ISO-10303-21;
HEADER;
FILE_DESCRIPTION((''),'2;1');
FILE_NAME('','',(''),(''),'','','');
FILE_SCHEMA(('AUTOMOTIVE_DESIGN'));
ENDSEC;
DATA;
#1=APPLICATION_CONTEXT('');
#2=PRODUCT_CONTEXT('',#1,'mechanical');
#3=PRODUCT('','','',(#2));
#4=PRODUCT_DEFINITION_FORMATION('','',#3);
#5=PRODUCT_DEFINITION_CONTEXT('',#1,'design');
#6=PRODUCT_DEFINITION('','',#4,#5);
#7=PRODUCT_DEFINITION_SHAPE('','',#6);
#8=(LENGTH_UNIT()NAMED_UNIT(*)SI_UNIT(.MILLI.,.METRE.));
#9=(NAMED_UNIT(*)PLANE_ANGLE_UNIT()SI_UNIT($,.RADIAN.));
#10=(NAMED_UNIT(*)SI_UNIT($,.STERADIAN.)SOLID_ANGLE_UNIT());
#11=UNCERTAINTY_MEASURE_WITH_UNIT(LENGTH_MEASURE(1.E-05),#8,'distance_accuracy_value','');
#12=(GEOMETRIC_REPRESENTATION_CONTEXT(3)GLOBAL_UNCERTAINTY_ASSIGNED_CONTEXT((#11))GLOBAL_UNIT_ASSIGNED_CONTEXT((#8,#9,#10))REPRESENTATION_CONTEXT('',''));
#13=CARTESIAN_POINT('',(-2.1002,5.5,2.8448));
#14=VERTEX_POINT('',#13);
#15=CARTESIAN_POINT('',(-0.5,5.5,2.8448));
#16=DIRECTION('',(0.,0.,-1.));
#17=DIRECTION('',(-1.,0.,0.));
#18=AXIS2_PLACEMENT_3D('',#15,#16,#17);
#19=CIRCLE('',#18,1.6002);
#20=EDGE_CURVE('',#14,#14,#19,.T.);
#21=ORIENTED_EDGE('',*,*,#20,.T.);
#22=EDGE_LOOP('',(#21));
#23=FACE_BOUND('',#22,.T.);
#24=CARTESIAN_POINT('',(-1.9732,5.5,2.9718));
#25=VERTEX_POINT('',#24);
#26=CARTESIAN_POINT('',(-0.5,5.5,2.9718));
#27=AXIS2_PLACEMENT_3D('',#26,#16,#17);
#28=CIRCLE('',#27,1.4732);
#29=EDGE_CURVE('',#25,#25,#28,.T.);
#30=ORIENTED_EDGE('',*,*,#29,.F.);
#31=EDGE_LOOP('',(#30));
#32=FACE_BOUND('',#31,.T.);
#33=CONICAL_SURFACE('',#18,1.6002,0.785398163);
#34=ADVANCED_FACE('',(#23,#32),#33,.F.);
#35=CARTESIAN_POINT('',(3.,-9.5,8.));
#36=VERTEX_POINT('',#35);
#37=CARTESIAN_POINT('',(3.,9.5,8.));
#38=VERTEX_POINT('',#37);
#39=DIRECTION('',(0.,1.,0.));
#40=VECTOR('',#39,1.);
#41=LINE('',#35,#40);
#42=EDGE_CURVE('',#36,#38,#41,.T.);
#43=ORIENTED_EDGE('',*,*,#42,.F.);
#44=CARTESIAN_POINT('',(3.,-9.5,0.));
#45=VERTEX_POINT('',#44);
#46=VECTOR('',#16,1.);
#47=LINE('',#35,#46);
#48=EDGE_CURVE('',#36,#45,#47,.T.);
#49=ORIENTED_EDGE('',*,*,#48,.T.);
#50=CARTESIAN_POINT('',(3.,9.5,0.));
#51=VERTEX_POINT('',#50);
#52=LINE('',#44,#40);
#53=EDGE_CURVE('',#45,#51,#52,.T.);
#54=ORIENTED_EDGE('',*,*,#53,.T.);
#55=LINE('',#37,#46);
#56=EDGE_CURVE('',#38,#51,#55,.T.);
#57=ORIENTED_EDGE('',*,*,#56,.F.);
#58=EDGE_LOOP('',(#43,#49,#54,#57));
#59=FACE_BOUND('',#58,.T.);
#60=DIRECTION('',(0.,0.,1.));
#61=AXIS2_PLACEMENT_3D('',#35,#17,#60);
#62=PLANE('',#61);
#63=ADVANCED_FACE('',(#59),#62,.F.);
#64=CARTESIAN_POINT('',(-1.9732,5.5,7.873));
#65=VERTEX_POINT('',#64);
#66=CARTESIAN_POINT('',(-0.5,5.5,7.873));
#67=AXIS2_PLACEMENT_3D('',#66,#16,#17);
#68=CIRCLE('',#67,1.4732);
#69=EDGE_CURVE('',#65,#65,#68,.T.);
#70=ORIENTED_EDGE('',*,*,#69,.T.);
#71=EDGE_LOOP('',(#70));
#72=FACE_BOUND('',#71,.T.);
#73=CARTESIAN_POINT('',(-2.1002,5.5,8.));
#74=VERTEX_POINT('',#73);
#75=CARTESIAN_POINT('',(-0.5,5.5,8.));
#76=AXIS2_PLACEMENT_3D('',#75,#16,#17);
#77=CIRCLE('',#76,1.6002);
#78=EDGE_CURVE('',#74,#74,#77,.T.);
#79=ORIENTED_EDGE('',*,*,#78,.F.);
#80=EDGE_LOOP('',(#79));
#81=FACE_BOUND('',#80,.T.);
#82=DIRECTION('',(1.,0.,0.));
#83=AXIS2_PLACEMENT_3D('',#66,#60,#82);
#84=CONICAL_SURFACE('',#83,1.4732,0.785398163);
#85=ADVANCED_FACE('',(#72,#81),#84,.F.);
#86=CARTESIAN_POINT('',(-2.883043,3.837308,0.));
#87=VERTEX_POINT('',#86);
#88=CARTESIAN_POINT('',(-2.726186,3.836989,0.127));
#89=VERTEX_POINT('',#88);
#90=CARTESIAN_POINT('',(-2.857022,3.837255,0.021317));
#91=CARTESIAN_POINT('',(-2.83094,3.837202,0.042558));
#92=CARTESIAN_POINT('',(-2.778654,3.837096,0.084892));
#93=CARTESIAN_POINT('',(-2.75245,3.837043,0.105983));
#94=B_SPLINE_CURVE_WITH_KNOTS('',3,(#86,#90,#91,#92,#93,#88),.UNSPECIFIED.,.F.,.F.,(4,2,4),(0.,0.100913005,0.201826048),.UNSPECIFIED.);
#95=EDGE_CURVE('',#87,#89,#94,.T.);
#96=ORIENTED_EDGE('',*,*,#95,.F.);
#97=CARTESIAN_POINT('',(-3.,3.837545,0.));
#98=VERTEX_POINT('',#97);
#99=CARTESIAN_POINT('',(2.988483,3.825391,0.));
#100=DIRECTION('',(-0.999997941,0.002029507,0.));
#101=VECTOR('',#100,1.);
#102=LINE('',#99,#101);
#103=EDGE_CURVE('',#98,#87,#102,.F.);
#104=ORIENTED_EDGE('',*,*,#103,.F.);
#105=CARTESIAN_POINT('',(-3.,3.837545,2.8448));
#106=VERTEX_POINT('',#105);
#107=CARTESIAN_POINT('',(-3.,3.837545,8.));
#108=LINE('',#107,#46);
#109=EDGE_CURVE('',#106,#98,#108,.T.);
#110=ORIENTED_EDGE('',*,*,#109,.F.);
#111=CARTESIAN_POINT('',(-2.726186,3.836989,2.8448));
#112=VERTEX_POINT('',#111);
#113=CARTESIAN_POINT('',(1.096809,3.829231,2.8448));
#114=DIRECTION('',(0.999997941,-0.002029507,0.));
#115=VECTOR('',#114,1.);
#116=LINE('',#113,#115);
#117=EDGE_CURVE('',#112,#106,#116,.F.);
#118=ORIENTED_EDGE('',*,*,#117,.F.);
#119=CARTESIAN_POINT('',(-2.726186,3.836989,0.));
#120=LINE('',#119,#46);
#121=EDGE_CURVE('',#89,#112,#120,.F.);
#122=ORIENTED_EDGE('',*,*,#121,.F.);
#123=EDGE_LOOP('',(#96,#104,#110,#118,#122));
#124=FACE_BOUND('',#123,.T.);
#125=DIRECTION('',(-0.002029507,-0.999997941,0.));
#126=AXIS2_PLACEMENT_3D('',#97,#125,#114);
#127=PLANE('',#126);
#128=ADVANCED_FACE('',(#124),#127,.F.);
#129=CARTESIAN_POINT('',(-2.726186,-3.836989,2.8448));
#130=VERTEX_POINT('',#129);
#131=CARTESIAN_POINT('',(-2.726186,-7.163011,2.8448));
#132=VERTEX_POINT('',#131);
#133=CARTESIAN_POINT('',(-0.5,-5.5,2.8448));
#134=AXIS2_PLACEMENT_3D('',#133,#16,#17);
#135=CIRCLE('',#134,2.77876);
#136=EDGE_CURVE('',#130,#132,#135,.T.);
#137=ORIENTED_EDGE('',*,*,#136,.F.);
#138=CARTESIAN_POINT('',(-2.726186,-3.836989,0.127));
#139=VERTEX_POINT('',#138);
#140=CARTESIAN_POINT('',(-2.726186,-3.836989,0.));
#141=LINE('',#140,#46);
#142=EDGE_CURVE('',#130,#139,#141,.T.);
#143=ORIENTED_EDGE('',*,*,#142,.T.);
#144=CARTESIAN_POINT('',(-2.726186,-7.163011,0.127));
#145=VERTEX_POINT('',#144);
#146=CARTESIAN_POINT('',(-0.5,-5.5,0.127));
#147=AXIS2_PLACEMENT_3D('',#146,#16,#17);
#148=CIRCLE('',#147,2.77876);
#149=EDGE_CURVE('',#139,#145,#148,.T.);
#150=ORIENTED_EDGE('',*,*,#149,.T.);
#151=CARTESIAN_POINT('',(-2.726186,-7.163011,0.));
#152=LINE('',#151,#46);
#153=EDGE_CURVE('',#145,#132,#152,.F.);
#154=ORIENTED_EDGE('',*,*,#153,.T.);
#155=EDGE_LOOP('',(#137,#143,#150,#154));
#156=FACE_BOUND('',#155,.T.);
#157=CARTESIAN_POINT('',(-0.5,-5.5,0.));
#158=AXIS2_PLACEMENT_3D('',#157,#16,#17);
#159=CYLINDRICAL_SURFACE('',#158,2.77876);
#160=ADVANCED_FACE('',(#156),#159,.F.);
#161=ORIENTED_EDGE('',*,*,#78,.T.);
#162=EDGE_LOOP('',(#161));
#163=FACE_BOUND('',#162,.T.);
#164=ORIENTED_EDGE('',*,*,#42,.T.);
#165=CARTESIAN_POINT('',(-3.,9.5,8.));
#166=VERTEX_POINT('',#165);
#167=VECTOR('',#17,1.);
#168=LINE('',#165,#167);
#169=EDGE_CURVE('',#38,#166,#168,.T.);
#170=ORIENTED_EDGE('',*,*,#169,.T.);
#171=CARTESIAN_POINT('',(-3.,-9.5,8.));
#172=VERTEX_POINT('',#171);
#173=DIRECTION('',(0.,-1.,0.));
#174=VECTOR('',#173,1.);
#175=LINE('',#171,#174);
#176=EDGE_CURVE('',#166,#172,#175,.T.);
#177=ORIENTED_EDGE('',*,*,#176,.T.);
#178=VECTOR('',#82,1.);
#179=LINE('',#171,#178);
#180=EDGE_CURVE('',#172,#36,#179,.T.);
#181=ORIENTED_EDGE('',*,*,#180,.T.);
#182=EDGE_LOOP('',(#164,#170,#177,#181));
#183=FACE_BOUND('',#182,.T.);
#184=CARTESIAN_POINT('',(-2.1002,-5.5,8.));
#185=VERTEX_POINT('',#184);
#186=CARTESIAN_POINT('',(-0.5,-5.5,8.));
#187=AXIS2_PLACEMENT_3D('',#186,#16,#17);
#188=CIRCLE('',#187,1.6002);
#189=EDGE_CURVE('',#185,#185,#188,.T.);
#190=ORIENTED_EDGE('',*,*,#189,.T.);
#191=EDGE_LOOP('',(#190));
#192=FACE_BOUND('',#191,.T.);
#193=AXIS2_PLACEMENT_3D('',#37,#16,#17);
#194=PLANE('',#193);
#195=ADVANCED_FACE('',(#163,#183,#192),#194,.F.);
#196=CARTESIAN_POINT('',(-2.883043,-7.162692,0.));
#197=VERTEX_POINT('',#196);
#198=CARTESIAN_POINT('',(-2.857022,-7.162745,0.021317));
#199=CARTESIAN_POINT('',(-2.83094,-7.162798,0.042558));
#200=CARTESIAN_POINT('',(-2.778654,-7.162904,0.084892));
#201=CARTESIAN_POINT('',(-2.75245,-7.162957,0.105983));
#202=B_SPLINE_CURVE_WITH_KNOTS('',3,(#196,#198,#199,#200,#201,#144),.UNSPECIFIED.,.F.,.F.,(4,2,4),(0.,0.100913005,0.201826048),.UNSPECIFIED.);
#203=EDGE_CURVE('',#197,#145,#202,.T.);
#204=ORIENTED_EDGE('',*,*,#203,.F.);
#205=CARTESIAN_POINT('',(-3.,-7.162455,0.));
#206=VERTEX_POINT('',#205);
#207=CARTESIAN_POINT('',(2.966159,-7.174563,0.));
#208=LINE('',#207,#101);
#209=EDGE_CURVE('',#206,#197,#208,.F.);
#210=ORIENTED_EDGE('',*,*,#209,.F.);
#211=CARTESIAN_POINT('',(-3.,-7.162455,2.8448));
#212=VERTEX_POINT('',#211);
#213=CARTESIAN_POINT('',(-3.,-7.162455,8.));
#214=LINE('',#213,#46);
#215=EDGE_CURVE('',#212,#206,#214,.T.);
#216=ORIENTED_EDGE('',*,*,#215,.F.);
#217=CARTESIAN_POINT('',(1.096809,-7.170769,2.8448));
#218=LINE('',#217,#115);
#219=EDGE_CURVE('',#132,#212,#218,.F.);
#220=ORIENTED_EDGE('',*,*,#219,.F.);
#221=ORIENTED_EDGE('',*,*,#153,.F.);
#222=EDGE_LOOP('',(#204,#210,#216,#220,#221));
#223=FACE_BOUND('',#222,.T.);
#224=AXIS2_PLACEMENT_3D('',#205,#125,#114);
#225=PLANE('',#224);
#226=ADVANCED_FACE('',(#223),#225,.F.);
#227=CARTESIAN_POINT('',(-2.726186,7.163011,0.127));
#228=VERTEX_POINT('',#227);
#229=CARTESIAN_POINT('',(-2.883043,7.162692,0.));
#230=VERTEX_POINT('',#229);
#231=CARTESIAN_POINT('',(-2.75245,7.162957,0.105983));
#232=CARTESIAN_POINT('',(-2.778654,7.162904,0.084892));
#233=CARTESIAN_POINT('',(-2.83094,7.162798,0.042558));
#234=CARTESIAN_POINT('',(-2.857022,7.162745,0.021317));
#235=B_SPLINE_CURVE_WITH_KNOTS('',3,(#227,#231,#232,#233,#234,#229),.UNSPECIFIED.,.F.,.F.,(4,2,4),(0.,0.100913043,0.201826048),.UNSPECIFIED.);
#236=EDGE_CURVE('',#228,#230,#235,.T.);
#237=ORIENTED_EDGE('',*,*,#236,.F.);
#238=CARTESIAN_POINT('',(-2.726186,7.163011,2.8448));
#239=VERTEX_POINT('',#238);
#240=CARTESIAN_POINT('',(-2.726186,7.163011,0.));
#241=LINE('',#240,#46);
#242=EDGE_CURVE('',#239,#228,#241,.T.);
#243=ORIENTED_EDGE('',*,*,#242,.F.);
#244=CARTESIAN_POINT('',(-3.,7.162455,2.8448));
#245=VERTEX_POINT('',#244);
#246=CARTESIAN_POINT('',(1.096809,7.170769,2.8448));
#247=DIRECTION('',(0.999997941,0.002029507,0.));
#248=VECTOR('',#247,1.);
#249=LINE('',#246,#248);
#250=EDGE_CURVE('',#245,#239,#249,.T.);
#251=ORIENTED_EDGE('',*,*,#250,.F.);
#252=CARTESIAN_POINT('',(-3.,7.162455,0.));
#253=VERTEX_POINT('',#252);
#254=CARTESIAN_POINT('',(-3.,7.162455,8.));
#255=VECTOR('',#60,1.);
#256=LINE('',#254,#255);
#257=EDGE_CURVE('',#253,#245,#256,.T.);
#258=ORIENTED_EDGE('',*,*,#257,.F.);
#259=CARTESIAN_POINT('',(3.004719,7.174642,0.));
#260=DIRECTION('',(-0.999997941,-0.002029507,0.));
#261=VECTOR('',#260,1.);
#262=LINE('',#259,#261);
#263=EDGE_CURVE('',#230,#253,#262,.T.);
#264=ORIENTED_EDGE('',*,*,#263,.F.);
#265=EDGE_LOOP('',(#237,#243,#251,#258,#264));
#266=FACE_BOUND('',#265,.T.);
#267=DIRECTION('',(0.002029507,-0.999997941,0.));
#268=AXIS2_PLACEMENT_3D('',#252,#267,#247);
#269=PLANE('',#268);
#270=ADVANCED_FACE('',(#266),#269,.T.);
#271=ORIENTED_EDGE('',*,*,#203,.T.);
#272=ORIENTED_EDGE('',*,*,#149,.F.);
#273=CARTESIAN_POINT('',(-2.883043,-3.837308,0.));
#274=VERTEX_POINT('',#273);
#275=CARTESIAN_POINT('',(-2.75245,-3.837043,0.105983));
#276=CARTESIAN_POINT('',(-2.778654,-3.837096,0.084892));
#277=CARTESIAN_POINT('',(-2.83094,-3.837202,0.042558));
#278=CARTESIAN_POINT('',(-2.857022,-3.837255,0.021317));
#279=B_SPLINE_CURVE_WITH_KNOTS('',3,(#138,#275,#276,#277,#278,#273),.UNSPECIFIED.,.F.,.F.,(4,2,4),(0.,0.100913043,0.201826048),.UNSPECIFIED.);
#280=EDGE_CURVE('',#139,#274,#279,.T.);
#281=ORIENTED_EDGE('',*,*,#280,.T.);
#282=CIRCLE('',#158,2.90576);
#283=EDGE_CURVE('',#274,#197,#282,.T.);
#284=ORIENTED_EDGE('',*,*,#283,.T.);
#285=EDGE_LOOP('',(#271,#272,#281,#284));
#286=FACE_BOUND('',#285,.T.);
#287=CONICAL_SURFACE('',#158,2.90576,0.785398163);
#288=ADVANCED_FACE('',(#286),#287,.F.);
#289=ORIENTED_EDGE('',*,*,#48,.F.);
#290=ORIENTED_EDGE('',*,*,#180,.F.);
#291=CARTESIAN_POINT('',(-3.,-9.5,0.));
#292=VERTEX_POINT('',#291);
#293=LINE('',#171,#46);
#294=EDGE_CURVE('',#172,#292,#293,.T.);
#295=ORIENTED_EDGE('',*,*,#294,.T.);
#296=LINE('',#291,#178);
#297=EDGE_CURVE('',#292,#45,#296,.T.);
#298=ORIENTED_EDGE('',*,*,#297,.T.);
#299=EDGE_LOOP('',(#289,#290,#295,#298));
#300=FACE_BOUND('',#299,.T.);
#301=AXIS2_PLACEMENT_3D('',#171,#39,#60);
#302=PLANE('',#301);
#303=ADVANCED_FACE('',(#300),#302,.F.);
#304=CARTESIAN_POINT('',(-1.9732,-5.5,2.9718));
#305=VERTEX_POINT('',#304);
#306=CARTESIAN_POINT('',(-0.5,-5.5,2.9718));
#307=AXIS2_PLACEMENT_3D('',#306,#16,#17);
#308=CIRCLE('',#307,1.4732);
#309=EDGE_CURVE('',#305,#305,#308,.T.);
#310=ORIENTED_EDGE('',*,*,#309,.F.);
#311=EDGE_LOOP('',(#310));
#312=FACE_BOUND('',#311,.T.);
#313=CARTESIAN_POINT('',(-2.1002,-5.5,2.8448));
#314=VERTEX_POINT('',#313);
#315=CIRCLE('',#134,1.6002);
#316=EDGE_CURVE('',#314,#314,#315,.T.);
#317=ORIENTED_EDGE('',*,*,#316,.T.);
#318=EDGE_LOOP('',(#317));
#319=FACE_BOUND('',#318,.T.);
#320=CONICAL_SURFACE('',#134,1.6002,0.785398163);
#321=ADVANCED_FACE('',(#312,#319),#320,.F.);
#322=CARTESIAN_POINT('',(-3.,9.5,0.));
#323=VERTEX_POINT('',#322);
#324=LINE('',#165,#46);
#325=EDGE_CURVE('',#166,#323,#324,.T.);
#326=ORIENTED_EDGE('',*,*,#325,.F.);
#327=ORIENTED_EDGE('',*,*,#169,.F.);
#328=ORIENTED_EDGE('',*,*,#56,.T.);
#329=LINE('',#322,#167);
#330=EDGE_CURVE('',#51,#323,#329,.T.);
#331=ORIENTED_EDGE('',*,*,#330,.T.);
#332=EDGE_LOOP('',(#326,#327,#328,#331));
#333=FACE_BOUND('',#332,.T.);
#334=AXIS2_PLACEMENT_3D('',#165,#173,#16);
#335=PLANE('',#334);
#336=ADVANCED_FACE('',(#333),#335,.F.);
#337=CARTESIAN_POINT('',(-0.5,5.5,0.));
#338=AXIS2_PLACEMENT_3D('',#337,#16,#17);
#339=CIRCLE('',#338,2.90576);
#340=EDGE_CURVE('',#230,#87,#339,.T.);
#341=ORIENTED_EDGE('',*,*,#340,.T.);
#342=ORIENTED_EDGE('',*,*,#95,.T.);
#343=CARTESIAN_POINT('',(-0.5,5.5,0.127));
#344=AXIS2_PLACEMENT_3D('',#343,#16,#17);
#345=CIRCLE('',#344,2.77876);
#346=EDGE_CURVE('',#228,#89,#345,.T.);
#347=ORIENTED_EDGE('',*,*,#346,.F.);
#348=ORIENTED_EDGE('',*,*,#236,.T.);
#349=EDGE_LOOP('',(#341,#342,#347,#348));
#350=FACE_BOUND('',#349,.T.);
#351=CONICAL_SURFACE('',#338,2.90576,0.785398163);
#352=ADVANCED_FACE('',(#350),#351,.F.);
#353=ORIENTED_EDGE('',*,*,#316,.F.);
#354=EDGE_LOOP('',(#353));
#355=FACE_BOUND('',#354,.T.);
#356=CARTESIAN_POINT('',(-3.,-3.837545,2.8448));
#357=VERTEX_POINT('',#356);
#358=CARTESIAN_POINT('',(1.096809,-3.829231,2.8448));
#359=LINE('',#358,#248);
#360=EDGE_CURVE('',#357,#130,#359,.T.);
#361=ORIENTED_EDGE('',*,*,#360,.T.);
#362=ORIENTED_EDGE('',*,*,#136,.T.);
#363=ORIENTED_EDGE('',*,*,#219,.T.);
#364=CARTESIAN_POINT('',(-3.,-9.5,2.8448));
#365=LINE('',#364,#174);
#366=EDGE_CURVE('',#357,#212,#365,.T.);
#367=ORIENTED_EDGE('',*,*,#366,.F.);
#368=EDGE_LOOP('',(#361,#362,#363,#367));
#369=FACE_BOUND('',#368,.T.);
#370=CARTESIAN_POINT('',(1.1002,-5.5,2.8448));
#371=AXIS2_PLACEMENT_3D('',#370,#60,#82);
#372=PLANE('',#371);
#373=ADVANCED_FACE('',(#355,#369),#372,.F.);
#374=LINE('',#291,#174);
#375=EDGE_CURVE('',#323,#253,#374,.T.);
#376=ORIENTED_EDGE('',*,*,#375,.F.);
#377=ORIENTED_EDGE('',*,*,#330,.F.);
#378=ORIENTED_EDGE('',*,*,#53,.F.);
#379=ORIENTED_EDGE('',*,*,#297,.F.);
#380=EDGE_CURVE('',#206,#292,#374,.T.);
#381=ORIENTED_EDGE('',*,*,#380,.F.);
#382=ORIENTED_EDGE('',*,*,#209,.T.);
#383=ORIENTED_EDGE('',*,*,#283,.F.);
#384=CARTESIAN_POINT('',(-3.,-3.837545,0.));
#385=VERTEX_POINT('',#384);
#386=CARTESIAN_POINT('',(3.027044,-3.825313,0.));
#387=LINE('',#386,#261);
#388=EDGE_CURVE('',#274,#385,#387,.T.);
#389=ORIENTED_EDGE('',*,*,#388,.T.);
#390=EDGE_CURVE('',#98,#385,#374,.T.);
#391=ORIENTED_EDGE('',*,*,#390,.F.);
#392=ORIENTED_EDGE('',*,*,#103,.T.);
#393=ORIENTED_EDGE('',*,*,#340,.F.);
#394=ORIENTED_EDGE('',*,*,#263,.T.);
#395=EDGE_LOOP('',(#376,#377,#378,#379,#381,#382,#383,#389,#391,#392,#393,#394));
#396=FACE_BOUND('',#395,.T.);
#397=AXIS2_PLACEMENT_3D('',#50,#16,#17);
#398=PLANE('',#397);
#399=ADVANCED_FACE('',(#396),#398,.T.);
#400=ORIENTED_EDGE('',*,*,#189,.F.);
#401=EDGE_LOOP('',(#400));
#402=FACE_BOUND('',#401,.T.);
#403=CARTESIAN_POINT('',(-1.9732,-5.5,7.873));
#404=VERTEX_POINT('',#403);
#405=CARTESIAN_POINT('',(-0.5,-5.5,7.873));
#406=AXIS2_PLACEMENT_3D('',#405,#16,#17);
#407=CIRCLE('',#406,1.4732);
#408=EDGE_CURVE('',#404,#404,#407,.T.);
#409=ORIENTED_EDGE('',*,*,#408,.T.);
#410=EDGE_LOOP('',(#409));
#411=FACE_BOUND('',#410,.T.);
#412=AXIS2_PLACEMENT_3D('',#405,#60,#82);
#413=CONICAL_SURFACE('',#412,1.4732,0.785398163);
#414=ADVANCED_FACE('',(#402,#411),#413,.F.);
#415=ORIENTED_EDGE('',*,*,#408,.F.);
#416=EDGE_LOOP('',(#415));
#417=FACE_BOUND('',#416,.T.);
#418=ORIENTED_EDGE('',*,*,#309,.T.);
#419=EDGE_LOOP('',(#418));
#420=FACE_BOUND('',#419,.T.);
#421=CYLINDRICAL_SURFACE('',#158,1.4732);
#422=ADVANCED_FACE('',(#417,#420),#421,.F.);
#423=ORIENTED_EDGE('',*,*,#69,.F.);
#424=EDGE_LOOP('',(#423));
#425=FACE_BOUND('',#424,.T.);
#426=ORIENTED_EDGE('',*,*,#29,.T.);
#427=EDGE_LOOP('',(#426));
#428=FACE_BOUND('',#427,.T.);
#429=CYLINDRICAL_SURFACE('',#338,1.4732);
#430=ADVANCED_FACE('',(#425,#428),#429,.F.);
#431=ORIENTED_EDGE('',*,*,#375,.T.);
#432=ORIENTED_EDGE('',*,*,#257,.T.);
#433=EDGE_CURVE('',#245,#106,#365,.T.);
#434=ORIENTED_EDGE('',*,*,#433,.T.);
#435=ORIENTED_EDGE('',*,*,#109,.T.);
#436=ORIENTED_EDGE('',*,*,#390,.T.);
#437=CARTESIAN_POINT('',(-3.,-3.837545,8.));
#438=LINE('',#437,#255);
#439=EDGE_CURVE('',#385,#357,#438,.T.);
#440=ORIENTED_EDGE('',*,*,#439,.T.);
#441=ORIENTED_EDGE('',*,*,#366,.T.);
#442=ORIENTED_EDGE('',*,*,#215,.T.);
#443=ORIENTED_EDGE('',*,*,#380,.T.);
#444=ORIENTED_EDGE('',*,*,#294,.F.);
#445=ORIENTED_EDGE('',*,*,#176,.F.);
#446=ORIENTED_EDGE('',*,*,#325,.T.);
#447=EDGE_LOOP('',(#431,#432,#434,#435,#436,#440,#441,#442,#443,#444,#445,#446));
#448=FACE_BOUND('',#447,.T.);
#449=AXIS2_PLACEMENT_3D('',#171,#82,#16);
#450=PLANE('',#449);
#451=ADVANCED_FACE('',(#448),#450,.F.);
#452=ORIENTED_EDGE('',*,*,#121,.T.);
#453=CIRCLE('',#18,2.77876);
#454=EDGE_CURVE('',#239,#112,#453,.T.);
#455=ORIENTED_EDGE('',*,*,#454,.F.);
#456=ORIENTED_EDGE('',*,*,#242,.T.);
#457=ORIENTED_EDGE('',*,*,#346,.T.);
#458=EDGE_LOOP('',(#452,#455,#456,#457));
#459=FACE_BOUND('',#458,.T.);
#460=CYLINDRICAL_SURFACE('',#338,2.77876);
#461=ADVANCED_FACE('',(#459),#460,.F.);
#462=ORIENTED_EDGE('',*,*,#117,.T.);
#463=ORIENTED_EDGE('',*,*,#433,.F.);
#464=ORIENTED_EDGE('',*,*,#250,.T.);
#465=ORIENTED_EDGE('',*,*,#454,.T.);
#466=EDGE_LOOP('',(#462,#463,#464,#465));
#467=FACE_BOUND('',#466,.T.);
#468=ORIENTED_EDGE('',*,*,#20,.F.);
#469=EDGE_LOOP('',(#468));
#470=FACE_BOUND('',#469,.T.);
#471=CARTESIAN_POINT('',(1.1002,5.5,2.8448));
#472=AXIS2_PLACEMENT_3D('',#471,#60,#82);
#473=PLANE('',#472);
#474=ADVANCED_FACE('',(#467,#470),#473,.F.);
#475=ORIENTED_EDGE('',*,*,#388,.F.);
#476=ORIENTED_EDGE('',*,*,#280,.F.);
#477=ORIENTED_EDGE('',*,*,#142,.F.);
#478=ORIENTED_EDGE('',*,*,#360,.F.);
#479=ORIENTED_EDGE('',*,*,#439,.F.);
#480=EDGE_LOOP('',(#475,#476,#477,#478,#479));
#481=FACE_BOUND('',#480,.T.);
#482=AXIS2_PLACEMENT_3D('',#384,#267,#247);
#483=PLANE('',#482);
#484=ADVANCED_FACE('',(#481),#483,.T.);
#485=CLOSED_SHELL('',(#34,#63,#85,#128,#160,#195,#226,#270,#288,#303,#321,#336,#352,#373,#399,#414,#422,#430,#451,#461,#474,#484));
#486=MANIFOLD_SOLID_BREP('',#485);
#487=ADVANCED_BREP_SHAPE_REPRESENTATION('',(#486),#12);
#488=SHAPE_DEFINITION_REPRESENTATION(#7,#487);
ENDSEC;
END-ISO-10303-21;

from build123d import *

# Parameters (mm, degrees)
SKETCH_1_W                = 6
SKETCH_1_H                = 19
EXTRUDE_1_DEPTH           = 8
HOLE_WIZARD_41_AT_2_COUNT = 2
HOLE_WIZARD_41_AT_2_PITCH = 11
CHAMFER_1_SIZE            = 0.449397949


with BuildPart() as part:
    # Эскиз1 → Бобышка-Вытянуть1 (new body)
    with BuildSketch(Plane.XY):
        Rectangle(SKETCH_1_W, SKETCH_1_H)
    extrude(amount=EXTRUDE_1_DEPTH)

    # Эскиз2 → Цековка для  винта с внутренним шестигранником #41 (revolve, cut)
    with BuildSketch(Plane(origin=(-0.5, 5.5, 0), x_dir=(0, 1, 0), z_dir=(1, 0, 0))):
        Polygon((0, 0), (0, 8), (1.6002, 8), (1.4732, 7.873), (1.4732, 2.9718), (1.6002, 2.8448), (2.77876, 2.8448), (2.77876, 0.127), (2.90576, 0), align=None)
    hole_wizard_41 = revolve(axis=Axis((-0.5, 5.5, -6.35), (0, 0, 1)), mode=Mode.SUBTRACT)

    # Цековка для  винта с внутренним шестигранником #41 at 2: Цековка для  винта с внутренним шестигранником #41 ×2
    with Locations(*[(0, -i * HOLE_WIZARD_41_AT_2_PITCH, 0) for i in range(1, HOLE_WIZARD_41_AT_2_COUNT)]):
        add(hole_wizard_41, mode=Mode.SUBTRACT)

    # Фаска1
    # the kernel refuses this chamfer: 0.5, 0.449397949 mm, written as the material it takes off along each edge
    with BuildSketch(Plane(origin=(-3, -4.286943061, 2.8448), x_dir=(0.5198491944846588, 0.8542580494169495, 0), z_dir=(0, 0, -1)), Plane(origin=(-3, 6.713056939, 2.8448), x_dir=(0.5198491944846584, 0.8542580494169496, 0), z_dir=(0, 0, -1))) as chamfer_1_piece_1:
        with BuildLine():
            Line((0.526718663, 0), (CHAMFER_1_SIZE * 0.854258048776, -CHAMFER_1_SIZE * 0.519849194094))
            Line((CHAMFER_1_SIZE * 0.854258048776, -CHAMFER_1_SIZE * 0.519849194094), (0, 0))
            ThreePointArc((0, 0), (0.268614935, -0.012503234), (0.526718663, 0))
        make_face()
    extrude(amount=4.061353185, mode=Mode.SUBTRACT)
    with BuildSketch(Plane(origin=(-3, -6.713056939, 2.8448), x_dir=(0.519849194484659, -0.8542580494169493, 0), z_dir=(0, 0, -1)), Plane(origin=(-3, 4.286943061, 2.8448), x_dir=(0.519849194484659, -0.8542580494169493, 0), z_dir=(0, 0, -1))) as chamfer_1_piece_2:
        with BuildLine():
            Line((0.526718663, 0), (CHAMFER_1_SIZE * 0.854258048776, CHAMFER_1_SIZE * 0.519849194094))
            Line((CHAMFER_1_SIZE * 0.854258048776, CHAMFER_1_SIZE * 0.519849194094), (0, 0))
            ThreePointArc((0, 0), (0.268614935, 0.012503234), (0.526718663, 0))
        make_face()
    extrude(amount=4.061353185, mode=Mode.SUBTRACT)


solid = part.part
